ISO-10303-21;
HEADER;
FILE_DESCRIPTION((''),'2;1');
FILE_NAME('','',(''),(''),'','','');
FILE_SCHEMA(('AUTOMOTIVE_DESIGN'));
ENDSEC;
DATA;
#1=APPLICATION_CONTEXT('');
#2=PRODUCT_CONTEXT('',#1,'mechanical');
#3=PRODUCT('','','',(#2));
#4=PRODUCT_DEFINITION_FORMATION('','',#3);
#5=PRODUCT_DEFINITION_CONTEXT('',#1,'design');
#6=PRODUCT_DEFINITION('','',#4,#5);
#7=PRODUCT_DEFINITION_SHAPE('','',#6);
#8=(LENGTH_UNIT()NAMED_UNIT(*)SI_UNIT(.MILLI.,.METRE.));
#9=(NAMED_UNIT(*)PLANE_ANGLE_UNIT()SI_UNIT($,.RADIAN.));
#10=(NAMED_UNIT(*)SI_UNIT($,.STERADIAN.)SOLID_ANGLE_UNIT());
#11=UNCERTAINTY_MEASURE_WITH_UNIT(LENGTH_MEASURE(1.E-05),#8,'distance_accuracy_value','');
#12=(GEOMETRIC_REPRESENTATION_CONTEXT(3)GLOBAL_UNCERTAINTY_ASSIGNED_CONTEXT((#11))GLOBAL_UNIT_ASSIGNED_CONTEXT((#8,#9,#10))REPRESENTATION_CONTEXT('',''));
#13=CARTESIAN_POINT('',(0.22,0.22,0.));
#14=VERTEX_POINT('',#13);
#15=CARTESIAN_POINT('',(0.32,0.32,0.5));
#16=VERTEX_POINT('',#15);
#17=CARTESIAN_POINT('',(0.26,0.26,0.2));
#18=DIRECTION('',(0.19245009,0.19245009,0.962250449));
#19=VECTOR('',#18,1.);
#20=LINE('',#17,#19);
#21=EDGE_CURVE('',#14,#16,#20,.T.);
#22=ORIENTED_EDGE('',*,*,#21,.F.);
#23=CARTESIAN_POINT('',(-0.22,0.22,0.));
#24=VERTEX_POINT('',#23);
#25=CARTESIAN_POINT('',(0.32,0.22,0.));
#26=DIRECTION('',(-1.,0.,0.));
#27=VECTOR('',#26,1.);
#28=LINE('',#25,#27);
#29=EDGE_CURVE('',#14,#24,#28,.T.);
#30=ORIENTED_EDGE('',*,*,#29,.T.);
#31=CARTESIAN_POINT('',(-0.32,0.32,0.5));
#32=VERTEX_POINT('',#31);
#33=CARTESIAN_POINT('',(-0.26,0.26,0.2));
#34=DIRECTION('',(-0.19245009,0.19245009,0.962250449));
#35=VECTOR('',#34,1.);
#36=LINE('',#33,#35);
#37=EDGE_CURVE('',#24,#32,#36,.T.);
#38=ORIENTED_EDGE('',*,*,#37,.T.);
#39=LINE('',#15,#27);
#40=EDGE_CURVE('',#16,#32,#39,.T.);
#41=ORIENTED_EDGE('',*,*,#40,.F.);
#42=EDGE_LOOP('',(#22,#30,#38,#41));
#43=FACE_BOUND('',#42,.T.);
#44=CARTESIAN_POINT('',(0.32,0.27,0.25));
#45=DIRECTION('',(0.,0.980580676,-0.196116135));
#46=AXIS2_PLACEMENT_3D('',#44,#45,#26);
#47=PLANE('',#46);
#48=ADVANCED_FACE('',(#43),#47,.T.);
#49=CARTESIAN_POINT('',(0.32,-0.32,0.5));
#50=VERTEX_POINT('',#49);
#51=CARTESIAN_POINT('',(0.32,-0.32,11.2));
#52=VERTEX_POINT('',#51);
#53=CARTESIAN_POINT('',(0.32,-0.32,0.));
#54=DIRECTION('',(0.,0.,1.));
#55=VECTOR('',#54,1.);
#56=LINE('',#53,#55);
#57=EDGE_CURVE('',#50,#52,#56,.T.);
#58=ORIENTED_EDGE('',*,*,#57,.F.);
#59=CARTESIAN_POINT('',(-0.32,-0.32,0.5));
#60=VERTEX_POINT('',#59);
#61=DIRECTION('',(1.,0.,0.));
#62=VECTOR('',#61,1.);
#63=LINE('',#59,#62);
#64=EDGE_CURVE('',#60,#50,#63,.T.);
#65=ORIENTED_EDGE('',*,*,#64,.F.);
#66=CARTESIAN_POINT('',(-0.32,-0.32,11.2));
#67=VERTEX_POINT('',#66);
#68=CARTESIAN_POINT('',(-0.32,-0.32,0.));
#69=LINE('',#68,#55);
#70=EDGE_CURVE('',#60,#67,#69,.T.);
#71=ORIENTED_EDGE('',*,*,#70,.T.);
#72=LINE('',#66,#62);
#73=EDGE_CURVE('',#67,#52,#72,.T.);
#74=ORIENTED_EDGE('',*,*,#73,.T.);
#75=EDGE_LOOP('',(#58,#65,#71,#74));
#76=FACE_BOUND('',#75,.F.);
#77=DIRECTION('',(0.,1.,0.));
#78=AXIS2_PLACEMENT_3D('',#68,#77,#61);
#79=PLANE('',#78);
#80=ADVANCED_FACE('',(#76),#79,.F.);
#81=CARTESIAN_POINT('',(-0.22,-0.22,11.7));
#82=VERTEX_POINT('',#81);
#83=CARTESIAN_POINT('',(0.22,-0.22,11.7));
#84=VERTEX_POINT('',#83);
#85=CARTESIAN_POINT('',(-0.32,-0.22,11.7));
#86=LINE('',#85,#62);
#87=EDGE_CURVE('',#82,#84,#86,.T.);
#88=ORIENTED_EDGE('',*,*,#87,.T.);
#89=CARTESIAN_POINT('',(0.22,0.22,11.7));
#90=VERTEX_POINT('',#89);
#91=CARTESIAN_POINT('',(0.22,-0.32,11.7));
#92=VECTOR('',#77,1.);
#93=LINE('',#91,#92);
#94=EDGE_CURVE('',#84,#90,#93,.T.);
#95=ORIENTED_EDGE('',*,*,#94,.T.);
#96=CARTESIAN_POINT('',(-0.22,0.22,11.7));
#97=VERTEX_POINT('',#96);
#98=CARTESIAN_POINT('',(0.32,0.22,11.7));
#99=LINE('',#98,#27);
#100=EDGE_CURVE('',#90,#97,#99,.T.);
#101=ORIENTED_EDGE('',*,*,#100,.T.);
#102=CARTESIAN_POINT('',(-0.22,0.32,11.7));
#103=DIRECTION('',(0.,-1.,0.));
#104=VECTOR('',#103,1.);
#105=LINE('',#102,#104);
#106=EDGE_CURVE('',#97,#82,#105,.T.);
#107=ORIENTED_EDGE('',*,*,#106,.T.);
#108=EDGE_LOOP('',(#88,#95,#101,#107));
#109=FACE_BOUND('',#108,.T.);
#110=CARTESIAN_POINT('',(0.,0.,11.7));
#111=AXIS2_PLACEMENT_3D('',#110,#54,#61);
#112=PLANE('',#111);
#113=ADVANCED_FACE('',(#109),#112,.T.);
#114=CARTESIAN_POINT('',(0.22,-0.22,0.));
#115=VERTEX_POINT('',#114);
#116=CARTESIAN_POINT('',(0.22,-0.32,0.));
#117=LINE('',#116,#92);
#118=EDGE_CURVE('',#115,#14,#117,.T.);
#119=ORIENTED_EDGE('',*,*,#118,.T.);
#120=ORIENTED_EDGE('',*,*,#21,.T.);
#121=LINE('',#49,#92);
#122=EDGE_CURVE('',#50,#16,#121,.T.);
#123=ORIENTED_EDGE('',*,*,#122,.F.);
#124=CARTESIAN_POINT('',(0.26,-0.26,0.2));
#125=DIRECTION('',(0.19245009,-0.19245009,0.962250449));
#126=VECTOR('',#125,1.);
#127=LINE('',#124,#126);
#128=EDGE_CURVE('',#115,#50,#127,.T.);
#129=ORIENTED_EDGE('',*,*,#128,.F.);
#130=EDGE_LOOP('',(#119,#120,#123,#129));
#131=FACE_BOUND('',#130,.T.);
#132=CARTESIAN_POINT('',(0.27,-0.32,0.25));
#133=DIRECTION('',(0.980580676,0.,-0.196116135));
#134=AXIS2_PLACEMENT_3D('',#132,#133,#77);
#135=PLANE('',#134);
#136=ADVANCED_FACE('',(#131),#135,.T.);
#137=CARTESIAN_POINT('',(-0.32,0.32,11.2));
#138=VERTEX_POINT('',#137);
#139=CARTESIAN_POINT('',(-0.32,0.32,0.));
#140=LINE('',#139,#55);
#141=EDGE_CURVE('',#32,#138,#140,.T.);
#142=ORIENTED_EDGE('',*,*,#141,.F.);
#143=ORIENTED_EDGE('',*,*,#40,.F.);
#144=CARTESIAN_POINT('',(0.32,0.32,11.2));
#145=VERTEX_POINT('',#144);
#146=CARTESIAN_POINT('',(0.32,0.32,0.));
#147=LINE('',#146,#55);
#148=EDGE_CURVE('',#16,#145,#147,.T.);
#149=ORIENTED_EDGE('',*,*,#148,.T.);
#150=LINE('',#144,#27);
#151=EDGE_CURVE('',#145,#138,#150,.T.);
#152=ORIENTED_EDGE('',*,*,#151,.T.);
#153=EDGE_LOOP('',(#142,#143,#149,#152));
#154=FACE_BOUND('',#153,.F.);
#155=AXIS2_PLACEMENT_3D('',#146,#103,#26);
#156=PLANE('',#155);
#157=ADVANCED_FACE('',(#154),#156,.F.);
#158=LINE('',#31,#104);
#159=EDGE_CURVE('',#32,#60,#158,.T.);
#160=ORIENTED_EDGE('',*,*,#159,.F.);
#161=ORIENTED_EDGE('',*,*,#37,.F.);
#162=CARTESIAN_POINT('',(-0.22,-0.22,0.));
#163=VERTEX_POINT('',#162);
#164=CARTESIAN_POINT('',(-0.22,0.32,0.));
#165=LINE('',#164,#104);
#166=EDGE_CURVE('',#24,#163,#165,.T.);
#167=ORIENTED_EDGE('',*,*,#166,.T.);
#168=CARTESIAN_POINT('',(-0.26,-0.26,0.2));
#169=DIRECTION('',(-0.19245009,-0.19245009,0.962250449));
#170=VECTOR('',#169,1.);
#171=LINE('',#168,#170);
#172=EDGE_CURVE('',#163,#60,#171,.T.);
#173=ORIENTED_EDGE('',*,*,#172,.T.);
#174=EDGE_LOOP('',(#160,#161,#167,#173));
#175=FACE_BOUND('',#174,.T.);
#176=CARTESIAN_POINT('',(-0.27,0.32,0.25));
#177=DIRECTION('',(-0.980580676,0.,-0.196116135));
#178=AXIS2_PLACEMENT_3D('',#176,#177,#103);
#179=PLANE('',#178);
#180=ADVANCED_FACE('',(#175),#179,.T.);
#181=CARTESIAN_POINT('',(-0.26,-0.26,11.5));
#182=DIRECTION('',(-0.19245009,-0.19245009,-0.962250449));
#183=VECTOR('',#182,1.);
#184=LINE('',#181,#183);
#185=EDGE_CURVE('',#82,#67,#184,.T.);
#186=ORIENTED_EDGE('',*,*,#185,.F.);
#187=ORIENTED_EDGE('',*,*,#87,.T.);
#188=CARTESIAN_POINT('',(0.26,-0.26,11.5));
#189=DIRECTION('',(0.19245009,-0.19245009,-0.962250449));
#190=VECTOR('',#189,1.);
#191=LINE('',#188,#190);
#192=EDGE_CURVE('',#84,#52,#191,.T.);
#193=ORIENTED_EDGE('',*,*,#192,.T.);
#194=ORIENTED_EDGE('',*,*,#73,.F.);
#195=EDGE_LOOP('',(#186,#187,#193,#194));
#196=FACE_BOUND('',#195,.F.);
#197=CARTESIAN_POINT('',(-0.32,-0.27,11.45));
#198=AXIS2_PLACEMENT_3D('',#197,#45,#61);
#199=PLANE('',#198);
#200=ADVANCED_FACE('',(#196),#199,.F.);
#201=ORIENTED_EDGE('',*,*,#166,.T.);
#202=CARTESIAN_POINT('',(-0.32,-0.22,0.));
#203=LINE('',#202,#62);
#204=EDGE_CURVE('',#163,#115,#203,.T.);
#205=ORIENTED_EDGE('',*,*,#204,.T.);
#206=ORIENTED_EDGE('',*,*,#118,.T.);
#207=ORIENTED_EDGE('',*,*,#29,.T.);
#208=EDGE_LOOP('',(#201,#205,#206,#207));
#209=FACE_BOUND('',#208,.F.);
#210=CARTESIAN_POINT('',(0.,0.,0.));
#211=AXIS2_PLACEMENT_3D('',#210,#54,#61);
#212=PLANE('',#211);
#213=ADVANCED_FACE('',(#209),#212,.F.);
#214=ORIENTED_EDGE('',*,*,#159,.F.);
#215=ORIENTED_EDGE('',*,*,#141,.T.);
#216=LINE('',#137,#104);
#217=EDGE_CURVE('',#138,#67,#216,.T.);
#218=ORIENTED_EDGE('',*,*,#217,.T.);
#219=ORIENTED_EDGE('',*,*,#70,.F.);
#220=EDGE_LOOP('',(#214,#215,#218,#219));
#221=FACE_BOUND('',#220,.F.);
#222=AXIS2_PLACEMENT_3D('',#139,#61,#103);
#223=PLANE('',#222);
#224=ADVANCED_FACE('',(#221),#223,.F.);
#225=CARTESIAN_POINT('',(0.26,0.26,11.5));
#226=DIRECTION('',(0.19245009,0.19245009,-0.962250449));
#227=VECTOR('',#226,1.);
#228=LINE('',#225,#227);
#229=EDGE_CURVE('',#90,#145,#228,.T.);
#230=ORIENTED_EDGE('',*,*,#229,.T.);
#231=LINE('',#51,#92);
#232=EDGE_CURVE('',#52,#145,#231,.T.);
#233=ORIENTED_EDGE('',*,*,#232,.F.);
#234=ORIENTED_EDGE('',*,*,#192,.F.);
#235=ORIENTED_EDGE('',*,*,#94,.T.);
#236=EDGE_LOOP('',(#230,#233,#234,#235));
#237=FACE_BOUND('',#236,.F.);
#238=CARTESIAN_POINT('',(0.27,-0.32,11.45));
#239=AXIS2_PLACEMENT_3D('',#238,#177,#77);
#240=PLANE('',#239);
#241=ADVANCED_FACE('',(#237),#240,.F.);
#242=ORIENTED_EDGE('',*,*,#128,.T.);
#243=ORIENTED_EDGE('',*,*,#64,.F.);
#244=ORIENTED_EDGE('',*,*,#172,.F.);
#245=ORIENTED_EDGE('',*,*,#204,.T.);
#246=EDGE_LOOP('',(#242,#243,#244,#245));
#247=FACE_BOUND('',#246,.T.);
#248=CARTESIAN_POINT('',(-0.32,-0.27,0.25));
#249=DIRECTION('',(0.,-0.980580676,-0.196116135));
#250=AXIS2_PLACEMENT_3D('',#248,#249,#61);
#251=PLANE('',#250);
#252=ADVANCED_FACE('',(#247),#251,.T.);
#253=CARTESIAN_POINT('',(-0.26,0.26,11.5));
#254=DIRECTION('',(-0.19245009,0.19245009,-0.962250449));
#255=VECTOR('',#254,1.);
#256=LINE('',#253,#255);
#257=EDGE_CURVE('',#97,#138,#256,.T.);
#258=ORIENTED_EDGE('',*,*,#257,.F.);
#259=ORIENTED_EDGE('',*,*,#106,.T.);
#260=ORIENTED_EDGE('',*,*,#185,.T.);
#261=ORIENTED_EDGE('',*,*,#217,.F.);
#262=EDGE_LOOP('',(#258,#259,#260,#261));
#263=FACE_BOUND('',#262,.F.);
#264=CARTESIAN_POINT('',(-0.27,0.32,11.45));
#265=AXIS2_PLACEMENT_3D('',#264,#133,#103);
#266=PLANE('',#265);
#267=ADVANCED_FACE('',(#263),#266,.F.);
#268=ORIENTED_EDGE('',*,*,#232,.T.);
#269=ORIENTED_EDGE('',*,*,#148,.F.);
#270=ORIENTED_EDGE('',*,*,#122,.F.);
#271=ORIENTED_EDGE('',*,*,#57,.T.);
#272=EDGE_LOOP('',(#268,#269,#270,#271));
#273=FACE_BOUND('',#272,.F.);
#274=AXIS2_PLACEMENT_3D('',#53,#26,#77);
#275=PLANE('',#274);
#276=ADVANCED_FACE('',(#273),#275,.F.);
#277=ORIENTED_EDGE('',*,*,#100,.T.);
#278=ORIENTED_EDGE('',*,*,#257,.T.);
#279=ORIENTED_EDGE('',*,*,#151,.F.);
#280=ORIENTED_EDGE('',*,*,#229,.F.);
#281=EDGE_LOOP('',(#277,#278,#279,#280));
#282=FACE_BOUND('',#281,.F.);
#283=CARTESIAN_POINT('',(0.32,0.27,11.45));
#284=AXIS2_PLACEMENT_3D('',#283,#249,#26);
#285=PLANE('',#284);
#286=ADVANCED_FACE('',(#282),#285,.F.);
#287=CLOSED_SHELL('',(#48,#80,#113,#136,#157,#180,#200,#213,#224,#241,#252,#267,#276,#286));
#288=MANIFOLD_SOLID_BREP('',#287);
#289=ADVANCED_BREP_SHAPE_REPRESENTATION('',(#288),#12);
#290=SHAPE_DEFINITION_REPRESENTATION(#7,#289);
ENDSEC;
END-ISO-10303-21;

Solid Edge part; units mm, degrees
sketch "Sketch1" plane through (0, 0, 0) normal (0, 0, 1) x (1, 0, 0)
  line L0 (-0.32, -0.32) -> (0.32, -0.32)
  line L1 (0.32, -0.32) -> (0.32, 0.32)
  line L2 (0.32, 0.32) -> (-0.32, 0.32)
  line L3 (-0.32, 0.32) -> (-0.32, -0.32)
extrude "Protrusion1" add sketch "Sketch1" along normal blind 11.7
chamfer "Chamfer" distance 0.1 distance2 0.5 8 edges at (-0.32, 0, 0) (0, 0.32, 0) (0.32, 0, 0) (0, -0.32, 0) (-0.32, 0, 11.7) (0, -0.32, 11.7) (0.32, 0, 11.7) (0, 0.32, 11.7) measured on face at (-0.2197, -0.2069, 11.7) measured on face at (-0.2197, -0.2069, 0)
